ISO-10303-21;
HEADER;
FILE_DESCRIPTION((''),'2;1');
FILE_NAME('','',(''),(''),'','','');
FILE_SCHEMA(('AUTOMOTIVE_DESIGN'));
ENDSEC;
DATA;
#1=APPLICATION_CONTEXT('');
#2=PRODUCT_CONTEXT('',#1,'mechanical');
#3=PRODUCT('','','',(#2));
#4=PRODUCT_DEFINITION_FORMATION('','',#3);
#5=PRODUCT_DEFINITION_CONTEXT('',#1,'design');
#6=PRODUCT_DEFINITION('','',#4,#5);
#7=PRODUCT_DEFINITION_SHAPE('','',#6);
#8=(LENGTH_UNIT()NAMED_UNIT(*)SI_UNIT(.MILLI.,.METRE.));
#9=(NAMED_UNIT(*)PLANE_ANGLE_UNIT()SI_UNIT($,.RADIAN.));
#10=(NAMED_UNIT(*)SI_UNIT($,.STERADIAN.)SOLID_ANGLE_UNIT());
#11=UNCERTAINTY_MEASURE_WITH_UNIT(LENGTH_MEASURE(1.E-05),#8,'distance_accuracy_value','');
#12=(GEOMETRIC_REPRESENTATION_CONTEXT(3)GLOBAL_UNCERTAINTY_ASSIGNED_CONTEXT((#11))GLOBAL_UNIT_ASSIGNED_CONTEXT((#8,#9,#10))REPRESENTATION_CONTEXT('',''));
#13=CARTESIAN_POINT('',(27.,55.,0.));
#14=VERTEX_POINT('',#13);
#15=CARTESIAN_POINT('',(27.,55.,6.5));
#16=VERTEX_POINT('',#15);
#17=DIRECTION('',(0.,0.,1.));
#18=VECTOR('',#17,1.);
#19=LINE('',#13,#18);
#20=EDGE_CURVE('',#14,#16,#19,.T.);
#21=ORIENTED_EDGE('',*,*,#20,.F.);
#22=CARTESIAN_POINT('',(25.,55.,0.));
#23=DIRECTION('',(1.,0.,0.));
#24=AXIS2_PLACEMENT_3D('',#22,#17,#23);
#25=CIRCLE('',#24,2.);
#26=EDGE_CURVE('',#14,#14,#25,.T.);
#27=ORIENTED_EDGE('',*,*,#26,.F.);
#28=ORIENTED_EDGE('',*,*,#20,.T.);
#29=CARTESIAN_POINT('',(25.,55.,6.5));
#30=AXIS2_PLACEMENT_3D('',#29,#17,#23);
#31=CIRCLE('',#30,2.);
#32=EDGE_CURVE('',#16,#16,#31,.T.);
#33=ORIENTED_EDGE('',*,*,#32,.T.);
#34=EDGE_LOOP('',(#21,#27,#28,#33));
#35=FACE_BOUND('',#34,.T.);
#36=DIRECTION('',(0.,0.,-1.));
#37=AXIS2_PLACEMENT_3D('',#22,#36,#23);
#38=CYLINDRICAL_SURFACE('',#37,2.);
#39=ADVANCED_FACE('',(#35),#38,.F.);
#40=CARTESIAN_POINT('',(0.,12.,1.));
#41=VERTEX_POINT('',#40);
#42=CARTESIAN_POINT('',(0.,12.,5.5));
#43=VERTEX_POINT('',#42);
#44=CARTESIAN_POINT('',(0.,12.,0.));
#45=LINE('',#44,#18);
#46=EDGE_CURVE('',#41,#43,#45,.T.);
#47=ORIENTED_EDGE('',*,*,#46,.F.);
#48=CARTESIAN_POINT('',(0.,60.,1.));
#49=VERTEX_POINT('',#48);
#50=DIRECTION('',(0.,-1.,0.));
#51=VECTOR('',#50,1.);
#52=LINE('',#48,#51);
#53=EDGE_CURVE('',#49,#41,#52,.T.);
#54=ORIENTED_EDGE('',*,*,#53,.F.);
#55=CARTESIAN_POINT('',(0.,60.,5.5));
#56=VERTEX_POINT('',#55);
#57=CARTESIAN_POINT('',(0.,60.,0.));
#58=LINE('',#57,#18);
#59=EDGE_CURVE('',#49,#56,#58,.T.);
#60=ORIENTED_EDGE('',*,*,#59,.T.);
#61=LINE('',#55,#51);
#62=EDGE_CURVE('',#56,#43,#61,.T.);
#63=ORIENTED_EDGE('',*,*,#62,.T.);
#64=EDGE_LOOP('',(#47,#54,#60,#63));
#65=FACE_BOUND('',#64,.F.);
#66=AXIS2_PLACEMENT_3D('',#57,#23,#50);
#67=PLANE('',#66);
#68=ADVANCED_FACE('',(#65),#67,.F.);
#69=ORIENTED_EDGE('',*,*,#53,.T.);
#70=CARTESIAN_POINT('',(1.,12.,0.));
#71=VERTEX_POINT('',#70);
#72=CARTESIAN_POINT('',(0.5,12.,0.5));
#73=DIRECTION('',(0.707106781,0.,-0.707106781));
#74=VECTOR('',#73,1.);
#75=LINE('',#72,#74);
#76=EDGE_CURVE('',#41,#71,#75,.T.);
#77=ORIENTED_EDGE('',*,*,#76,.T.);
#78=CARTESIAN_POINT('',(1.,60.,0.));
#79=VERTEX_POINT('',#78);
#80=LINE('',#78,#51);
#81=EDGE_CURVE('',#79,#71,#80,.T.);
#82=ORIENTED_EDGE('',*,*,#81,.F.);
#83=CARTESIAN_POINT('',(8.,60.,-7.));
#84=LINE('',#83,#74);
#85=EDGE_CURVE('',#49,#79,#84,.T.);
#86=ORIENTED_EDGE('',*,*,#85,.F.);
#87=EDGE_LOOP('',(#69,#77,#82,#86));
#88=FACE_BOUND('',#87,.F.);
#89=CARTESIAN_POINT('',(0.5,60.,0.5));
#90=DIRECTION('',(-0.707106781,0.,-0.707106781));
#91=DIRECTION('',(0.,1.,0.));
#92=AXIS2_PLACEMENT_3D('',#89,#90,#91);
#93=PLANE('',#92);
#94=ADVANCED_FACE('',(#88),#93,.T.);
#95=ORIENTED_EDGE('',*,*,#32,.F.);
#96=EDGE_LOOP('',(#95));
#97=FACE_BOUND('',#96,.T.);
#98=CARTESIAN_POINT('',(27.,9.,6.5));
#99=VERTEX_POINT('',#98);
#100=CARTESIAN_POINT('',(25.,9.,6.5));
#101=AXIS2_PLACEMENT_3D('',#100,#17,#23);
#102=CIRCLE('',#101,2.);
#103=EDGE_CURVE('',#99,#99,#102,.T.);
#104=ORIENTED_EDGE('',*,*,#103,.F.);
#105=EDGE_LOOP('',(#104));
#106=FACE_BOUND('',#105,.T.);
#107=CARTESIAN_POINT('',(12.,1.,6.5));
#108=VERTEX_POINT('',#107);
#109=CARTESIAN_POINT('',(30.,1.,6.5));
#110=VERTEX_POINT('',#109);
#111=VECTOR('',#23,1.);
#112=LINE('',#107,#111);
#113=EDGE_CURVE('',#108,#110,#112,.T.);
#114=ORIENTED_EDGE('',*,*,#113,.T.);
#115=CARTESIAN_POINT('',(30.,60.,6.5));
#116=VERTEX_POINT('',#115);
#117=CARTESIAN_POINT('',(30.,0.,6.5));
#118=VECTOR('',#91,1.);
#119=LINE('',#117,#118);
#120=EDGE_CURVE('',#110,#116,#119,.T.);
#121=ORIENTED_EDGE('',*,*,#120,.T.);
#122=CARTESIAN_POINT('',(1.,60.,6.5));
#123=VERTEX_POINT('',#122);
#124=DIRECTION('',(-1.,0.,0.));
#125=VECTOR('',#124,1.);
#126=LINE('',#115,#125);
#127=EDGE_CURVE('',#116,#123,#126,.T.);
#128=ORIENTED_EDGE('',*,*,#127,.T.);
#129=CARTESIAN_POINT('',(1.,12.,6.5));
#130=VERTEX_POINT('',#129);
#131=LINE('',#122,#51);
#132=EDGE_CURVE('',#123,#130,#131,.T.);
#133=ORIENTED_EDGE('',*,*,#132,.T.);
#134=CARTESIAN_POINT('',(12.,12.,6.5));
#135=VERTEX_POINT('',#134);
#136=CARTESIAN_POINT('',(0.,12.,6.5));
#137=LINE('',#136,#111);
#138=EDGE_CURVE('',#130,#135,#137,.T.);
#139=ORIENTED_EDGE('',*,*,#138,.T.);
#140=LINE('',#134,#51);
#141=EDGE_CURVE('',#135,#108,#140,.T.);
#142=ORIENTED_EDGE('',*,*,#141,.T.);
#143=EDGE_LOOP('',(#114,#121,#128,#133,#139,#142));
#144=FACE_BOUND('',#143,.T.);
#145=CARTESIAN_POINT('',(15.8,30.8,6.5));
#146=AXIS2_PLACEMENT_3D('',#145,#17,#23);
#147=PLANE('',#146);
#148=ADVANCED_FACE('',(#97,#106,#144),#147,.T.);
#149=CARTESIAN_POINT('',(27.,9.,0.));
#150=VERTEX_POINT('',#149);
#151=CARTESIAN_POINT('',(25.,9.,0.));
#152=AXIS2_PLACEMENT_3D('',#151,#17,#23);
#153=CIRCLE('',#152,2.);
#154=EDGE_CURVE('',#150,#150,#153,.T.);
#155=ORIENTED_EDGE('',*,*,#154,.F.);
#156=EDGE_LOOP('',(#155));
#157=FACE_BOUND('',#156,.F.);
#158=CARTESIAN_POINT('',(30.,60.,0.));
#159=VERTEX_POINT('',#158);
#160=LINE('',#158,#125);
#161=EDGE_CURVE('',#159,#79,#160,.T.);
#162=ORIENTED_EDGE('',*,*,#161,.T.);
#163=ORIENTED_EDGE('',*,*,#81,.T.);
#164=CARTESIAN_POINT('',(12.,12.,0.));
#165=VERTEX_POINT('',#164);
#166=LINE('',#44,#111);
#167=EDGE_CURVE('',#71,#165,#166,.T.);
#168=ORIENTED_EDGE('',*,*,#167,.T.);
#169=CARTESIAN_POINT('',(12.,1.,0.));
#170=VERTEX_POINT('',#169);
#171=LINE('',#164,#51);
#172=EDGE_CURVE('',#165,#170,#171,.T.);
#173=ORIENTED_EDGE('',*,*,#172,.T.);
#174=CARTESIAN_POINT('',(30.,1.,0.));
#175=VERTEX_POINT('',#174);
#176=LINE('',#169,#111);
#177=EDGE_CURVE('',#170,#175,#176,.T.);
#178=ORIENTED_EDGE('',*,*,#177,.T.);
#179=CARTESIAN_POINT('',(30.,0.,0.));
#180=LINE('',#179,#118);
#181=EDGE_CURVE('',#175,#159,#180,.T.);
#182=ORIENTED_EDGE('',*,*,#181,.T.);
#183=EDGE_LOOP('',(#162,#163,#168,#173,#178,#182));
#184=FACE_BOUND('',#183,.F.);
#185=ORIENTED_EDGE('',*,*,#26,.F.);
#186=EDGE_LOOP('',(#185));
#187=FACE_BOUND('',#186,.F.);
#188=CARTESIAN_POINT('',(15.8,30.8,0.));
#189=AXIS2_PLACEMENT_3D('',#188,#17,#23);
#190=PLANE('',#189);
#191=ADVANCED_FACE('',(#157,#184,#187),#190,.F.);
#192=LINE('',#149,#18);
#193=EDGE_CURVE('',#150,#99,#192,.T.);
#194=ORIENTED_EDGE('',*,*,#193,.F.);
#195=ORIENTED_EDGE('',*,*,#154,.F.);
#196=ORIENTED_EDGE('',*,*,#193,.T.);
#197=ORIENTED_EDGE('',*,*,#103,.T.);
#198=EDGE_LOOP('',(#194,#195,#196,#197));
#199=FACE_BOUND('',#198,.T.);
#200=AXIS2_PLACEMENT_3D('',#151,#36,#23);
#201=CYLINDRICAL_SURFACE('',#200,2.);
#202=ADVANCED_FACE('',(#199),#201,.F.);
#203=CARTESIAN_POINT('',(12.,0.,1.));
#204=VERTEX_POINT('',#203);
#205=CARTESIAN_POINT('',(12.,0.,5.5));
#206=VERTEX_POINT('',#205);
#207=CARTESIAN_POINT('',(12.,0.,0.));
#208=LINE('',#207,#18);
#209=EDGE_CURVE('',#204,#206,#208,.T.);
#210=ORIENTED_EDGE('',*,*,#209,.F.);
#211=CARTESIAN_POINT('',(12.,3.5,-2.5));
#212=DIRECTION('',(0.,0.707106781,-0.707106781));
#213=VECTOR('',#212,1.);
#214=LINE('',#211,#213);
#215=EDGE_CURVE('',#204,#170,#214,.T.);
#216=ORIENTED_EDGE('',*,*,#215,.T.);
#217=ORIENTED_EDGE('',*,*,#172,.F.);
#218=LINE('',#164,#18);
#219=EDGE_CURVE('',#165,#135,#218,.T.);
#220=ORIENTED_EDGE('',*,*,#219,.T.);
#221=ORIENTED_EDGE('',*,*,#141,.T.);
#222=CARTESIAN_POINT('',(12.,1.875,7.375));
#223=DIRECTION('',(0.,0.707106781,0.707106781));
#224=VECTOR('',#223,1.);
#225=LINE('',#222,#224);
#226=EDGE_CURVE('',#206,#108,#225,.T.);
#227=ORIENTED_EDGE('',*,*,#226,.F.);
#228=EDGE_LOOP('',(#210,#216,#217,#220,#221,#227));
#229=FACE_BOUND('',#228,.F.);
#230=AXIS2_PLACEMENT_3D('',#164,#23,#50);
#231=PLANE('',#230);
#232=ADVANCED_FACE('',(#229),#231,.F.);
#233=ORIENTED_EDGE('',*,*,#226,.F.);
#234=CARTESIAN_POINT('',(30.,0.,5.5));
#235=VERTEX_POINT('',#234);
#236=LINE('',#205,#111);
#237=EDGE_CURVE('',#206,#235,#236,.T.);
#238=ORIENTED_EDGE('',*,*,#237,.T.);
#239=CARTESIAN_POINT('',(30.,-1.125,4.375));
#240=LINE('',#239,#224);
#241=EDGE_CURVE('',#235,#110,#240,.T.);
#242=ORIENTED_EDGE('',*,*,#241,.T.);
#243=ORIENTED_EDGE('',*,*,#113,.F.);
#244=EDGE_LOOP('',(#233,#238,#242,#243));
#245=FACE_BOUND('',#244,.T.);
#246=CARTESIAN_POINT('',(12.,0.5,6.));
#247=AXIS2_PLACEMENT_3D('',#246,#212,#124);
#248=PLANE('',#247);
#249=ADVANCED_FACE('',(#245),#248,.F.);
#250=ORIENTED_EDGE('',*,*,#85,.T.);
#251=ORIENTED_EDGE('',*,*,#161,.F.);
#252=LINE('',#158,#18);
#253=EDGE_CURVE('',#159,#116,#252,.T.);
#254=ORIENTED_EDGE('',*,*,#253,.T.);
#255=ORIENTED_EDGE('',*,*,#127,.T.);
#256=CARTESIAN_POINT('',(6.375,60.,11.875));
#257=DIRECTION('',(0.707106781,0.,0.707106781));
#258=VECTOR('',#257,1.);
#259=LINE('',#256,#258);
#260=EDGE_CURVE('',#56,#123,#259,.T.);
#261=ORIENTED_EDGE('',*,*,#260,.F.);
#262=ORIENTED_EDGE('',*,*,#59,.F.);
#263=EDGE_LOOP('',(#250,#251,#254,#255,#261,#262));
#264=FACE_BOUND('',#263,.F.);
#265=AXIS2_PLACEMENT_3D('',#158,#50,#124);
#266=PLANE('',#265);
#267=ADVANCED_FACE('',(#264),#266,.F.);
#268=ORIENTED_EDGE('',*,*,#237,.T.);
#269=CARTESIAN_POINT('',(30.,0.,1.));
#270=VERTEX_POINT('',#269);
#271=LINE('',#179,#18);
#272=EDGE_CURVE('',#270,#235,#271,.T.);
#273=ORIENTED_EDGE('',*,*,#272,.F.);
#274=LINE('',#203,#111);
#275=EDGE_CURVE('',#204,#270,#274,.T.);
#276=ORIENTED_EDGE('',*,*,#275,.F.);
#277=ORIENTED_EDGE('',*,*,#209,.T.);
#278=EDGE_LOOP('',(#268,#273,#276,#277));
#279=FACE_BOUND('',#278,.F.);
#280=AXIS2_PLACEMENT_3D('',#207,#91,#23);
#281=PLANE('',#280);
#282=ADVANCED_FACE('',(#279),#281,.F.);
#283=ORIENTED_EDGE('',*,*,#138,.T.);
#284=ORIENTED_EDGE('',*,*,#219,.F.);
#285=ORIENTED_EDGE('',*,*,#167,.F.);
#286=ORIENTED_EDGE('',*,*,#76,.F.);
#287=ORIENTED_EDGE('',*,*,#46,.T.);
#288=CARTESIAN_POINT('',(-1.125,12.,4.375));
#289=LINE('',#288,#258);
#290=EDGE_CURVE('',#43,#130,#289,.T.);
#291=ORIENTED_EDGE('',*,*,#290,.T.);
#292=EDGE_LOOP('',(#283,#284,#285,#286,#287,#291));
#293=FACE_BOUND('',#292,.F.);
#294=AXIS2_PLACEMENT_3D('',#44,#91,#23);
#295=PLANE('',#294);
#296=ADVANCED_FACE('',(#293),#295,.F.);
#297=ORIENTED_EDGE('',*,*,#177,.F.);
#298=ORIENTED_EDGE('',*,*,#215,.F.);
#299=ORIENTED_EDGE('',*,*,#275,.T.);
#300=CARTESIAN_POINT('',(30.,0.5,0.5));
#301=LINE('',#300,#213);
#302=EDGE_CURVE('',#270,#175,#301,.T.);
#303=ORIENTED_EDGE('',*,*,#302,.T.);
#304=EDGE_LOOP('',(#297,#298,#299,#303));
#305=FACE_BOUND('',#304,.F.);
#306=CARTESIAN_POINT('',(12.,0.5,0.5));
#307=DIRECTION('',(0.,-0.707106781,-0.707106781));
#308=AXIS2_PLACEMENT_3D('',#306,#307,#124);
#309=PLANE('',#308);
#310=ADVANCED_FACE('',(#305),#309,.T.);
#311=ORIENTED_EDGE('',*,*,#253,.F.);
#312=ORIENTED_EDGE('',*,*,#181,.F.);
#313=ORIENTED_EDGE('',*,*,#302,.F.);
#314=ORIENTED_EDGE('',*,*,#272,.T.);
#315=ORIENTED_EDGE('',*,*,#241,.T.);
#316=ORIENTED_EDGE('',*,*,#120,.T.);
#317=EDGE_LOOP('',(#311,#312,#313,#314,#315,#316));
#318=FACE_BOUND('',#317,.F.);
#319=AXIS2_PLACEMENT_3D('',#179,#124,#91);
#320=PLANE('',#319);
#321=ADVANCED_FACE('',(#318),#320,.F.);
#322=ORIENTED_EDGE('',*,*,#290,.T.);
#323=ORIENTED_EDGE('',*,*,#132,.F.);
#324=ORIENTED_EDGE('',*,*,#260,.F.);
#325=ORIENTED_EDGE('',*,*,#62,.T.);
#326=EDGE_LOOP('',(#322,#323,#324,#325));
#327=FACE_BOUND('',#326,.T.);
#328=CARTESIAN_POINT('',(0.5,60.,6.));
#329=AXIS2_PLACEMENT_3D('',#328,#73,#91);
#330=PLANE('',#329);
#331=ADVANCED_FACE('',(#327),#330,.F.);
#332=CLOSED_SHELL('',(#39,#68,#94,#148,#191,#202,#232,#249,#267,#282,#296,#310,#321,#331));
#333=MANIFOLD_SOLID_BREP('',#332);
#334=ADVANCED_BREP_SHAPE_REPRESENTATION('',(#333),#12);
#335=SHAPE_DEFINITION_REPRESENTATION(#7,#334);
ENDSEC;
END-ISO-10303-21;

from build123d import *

# Parameters (mm, degrees)
F0_R     = 2
F1_DEPTH = 6.5
F2_SIZE  = 1


# Not quite as in the source:
# - a feature names something its author has since deleted; it is built from what else it names


with BuildPart() as f1:
    # F0 (on Top) → F1 (new body)
    with BuildSketch(Plane.XY):
        Polygon((12, 12), (12, 0), (30, 0), (30, 60), (0, 60), (0, 12), align=None)
        with Locations((25, 9)):
            Circle(F0_R, mode=Mode.SUBTRACT)
        with Locations((25, 55)):
            Circle(F0_R, mode=Mode.SUBTRACT)
    extrude(amount=F1_DEPTH)

    # F2
    f2_edges = [f1.edges().sort_by_distance(p)[0] for p in [
        (21, 0, 0),
        (21, 0, 6.5),
        (0, 36, 0),
        (0, 36, 6.5),
    ]]
    chamfer(f2_edges, length=F2_SIZE)


solid = f1.part
